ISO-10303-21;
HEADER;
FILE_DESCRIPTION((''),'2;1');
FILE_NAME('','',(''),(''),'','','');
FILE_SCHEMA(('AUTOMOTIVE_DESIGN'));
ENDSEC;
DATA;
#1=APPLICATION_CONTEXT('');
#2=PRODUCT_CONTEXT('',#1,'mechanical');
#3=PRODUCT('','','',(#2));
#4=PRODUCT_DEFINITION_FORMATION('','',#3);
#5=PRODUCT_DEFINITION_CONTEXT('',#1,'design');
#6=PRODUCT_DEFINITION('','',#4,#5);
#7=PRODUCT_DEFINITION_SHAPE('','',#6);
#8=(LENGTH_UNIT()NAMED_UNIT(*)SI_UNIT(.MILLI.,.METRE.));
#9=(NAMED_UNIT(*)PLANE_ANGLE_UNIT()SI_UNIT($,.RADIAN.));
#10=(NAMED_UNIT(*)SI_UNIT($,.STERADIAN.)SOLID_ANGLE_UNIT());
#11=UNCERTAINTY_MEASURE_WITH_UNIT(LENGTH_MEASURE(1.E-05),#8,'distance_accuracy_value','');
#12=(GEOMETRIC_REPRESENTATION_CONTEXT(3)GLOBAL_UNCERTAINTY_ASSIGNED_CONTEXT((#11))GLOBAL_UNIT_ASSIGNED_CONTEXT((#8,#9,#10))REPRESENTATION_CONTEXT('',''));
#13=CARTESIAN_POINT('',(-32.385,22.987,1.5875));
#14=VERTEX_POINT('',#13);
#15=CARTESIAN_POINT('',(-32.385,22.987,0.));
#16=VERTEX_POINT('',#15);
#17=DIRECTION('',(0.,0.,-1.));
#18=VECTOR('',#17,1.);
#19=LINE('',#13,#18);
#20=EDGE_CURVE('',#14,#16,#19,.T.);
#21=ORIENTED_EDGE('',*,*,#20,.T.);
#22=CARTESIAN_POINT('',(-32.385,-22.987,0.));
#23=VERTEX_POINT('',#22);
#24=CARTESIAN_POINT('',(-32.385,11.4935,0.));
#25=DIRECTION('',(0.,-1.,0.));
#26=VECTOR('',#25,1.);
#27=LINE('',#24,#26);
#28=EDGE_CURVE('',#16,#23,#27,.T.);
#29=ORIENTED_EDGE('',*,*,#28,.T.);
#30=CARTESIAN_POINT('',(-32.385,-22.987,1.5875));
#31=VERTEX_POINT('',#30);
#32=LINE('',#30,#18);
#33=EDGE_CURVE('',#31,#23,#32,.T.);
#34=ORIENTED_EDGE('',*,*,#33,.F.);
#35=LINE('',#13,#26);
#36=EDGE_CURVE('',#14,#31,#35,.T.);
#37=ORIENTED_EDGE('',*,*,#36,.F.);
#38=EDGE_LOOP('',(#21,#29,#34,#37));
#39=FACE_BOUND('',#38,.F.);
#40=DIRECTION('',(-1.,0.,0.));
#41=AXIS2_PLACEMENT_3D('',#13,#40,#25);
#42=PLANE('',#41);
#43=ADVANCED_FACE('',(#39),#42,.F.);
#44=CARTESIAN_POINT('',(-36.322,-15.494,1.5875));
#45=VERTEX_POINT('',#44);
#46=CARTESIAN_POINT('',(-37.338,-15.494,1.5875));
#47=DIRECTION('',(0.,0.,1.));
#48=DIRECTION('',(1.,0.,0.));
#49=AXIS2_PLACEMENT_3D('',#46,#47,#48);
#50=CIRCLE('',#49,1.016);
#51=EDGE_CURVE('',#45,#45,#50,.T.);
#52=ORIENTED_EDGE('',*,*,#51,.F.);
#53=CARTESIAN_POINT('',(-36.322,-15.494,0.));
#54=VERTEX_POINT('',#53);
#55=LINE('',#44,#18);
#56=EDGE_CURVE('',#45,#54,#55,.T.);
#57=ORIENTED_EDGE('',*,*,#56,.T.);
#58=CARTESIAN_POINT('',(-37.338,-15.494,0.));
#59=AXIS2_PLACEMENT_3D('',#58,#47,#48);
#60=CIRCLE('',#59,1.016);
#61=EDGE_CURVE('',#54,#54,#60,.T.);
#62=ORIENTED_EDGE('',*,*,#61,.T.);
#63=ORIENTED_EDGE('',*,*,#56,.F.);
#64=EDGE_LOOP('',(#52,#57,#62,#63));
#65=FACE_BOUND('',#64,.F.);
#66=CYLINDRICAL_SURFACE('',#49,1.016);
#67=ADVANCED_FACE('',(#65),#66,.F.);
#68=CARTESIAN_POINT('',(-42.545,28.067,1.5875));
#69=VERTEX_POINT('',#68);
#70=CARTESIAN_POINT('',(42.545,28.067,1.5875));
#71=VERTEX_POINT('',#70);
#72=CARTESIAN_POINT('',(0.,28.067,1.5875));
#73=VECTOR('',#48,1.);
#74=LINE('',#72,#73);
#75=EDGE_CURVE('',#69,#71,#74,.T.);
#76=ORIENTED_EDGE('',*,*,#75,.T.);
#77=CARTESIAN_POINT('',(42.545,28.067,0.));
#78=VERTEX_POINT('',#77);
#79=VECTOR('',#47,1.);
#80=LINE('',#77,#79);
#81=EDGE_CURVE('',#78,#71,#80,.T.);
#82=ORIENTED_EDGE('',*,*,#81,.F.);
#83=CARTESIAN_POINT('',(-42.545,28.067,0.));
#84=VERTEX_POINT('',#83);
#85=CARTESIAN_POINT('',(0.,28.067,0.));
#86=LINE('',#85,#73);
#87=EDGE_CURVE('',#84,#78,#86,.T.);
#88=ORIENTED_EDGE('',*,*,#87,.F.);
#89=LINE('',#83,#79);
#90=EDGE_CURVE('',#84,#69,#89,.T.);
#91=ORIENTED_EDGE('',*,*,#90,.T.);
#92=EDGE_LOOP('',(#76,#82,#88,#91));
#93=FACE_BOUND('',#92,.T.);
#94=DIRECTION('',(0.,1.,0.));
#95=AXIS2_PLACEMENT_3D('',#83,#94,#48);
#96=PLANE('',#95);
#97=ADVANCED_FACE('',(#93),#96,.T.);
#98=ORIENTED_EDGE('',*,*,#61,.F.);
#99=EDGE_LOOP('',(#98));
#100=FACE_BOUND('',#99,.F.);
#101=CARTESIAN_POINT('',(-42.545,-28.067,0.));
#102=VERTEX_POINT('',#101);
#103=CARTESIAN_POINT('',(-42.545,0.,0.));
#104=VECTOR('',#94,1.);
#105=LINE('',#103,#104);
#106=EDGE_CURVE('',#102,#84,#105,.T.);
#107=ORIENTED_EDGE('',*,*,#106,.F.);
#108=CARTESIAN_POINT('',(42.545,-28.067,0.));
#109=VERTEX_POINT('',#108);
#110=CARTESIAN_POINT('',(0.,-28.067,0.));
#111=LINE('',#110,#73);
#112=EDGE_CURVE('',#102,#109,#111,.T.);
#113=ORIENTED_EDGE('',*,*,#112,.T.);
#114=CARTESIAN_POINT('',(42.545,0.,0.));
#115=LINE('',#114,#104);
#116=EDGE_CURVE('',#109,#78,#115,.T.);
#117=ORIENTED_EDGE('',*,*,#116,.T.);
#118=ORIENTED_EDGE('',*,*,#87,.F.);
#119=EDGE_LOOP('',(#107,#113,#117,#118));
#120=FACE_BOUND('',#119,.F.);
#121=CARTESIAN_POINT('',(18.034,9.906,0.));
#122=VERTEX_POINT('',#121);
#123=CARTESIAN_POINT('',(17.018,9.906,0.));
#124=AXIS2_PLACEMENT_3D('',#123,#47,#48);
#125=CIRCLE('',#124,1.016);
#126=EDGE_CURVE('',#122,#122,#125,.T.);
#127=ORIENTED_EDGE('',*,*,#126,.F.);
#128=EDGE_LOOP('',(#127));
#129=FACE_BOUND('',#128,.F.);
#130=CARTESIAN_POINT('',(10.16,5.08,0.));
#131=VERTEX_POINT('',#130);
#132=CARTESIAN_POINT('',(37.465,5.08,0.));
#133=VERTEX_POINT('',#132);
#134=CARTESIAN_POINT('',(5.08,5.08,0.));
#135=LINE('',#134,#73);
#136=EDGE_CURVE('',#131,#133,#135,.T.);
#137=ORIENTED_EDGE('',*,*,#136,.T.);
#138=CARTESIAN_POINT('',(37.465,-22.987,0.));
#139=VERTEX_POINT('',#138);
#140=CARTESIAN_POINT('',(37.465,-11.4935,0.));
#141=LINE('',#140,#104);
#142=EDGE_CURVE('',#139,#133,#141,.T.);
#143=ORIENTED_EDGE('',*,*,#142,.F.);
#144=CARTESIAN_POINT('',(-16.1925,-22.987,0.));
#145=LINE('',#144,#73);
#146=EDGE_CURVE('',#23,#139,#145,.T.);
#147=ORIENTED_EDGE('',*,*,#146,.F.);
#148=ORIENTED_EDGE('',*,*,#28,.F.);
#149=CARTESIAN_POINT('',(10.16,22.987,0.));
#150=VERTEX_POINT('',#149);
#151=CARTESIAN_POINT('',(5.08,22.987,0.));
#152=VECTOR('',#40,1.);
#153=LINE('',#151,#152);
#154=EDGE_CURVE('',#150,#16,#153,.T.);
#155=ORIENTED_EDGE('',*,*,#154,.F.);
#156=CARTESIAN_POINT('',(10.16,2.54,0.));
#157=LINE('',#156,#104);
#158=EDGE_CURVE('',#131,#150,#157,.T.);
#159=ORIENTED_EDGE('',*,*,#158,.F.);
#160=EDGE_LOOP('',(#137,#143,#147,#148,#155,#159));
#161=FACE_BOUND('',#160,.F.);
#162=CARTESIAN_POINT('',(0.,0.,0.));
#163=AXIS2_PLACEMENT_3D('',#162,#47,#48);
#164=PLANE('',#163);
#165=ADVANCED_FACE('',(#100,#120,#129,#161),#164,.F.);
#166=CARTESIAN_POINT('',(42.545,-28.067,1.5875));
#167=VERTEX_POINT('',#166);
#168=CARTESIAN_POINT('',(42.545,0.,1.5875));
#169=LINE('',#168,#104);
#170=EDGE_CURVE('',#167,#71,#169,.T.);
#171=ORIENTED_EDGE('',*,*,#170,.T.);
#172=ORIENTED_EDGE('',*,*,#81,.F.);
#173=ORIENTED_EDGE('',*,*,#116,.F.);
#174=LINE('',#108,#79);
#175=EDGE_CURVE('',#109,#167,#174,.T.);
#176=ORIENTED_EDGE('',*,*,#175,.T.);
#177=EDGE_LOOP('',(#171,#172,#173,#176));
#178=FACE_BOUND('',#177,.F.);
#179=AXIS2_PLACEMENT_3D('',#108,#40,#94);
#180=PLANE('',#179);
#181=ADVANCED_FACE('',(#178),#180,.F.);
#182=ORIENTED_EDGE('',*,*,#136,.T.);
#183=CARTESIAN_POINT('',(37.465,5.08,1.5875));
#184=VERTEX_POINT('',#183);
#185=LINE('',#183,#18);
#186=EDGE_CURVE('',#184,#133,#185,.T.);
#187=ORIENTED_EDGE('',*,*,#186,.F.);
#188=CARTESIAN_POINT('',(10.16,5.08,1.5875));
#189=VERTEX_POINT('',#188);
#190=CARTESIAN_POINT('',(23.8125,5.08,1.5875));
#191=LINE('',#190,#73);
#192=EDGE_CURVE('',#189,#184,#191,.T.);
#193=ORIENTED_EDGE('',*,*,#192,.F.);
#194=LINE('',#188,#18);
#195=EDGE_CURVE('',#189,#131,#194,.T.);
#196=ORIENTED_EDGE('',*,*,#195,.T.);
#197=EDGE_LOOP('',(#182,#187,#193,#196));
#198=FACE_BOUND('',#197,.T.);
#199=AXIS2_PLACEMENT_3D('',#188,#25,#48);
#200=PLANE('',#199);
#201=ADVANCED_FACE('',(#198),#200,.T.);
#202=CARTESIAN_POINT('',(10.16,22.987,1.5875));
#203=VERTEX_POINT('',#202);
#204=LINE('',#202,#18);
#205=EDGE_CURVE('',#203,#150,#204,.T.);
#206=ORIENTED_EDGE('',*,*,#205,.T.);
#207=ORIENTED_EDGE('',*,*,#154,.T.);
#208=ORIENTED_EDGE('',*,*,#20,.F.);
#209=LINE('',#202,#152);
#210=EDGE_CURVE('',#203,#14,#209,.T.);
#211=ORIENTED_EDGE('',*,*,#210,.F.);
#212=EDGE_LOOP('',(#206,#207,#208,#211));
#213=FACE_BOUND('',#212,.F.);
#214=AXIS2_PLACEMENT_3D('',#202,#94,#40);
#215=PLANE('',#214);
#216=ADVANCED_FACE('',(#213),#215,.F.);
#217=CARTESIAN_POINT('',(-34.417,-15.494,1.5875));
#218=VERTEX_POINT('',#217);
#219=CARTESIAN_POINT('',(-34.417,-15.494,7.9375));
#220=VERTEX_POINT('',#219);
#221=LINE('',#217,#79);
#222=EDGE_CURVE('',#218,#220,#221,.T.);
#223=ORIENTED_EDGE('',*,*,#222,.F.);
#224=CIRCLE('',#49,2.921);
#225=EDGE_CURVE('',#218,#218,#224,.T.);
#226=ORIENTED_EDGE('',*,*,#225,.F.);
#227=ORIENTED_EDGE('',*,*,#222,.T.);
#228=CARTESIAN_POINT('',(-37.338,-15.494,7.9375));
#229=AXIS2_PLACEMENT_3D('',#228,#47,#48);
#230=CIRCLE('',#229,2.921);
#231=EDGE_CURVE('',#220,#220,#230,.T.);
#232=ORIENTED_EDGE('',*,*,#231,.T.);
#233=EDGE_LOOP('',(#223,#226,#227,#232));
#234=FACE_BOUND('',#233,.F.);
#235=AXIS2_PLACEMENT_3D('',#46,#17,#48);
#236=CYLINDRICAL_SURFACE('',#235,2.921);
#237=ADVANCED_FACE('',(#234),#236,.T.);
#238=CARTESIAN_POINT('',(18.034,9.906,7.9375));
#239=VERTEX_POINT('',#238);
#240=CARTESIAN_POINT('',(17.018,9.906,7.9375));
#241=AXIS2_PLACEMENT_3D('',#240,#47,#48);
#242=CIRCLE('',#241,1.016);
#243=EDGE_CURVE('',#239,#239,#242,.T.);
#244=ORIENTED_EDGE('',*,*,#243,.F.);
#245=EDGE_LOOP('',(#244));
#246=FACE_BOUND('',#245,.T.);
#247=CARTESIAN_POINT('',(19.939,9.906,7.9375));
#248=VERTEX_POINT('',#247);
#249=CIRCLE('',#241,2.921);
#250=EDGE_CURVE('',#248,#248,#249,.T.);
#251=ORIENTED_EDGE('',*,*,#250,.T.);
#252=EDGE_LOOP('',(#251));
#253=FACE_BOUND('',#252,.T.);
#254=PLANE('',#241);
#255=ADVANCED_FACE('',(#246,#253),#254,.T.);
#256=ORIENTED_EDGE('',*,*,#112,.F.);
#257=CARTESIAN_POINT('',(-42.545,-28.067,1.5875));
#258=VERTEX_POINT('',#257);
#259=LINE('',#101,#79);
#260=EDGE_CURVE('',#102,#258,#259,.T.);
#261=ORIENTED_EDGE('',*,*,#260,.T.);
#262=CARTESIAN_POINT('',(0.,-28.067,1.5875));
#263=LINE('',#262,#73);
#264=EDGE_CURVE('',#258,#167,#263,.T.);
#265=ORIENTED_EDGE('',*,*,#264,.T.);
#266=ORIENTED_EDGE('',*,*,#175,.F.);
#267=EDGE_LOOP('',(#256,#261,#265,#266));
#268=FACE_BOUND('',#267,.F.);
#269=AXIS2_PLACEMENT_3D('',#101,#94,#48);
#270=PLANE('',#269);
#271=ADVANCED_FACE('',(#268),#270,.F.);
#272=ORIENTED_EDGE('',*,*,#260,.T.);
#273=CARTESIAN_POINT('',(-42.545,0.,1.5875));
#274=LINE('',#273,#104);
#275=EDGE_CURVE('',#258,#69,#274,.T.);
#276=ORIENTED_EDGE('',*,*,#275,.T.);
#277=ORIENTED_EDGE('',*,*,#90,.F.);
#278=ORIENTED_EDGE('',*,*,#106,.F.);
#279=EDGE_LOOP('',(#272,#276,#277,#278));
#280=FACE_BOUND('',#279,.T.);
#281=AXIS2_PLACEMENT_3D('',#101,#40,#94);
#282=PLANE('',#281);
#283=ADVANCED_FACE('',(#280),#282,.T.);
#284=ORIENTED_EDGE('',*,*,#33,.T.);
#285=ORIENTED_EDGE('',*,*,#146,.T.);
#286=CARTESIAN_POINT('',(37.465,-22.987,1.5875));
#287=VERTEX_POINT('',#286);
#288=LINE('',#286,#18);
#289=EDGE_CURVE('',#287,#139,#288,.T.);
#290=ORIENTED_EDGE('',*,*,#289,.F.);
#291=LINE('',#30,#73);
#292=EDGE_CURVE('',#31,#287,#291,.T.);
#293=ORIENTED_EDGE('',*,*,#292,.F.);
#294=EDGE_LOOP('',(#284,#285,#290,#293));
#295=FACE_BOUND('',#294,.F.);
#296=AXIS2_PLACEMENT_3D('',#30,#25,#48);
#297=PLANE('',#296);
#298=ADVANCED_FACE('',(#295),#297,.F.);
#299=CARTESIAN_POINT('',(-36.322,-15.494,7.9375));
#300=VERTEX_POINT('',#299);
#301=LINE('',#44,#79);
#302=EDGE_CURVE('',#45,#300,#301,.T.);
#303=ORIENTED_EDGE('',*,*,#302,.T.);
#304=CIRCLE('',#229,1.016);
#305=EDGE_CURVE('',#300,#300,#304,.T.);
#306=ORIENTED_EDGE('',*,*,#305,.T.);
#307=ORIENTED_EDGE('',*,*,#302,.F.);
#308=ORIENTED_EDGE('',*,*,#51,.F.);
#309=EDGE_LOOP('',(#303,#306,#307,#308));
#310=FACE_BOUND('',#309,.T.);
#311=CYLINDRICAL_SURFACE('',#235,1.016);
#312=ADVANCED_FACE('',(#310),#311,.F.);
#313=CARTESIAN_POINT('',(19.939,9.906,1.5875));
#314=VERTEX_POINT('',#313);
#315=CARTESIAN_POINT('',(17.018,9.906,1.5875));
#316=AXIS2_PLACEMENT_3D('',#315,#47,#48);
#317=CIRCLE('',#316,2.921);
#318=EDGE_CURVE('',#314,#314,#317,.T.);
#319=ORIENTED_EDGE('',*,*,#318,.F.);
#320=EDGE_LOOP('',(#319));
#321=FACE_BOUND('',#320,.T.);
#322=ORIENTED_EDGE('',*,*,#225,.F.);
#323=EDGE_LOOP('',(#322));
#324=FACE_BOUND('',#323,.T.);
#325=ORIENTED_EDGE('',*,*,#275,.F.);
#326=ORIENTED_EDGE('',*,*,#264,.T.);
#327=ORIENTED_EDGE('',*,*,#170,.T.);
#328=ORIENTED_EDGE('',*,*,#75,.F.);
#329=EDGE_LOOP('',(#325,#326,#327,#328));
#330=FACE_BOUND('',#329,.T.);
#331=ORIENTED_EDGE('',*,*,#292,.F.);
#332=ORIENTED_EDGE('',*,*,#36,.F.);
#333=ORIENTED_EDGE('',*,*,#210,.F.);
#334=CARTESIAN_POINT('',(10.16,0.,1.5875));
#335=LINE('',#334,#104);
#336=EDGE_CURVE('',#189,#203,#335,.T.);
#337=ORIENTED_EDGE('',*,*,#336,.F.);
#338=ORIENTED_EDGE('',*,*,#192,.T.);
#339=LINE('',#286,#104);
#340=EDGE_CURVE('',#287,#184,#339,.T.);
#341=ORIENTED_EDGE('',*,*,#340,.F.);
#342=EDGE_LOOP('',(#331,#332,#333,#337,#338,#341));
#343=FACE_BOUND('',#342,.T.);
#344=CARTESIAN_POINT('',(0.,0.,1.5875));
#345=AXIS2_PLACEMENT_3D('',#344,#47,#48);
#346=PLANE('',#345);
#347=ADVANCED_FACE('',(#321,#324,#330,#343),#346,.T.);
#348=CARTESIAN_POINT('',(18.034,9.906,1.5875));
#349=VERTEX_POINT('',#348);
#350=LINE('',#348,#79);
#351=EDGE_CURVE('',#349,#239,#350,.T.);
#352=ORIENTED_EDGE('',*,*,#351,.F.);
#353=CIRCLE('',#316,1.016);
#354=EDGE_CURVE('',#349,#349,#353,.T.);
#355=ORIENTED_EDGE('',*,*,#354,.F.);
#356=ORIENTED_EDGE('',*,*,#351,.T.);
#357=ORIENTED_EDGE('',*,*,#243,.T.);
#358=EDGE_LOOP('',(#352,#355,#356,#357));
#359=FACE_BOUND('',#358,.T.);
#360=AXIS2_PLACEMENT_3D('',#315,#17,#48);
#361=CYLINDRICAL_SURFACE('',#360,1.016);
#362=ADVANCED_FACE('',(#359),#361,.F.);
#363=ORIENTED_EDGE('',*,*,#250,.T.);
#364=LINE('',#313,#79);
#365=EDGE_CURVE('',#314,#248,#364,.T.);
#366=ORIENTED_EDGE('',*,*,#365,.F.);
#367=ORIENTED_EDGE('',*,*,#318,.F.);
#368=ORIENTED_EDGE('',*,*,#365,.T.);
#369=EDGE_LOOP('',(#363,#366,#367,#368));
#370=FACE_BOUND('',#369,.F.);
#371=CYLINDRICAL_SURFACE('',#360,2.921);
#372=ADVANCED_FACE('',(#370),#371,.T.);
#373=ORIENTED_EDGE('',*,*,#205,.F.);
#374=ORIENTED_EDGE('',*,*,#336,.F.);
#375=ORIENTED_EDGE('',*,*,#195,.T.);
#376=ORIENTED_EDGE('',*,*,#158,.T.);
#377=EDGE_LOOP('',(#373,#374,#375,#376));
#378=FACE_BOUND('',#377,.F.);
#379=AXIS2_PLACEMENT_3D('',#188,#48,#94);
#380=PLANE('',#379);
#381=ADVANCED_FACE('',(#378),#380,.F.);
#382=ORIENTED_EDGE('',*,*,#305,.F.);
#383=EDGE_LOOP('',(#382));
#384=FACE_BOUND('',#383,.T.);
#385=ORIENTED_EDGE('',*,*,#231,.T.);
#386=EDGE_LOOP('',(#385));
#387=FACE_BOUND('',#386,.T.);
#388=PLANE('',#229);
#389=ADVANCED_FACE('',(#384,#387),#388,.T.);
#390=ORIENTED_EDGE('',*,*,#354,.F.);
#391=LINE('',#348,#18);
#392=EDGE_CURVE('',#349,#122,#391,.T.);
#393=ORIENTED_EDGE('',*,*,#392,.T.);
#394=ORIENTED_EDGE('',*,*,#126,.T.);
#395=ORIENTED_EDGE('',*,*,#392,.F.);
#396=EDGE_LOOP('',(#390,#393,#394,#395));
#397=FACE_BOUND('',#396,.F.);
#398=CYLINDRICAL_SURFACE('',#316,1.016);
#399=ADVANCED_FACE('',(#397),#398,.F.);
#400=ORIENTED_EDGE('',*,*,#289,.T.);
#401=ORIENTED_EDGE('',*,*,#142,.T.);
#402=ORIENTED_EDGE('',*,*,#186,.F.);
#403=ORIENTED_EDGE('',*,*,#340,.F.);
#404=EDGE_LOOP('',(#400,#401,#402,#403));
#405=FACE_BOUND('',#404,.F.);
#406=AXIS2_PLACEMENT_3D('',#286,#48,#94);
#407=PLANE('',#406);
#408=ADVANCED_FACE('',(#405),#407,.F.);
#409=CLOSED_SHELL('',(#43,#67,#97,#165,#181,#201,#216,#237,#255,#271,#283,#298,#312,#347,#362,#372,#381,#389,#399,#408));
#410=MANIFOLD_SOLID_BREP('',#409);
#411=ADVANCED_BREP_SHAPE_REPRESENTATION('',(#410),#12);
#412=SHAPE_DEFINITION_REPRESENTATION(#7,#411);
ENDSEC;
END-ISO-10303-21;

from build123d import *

# Parameters (mm, degrees)
F0_W     = 85.09
F0_H     = 56.134
F1_DEPTH = 1.5875
F2_R     = 2.921
F2_R_2   = 1.016
F3_DEPTH = 6.35
F4_DEPTH = 6.35
F5_W     = 32.385
F5_H     = 22.987
F5_W_2   = 27.305
F5_H_2   = 5.08
F6_DEPTH = 6.35


# Not quite as in the source:
# - a feature names something its author has since deleted; it is built from what else it names


with BuildPart() as f1:
    # F0 (on Top) → F1 (new body)
    with BuildSketch(Plane.XY):
        Rectangle(F0_W, F0_H)
    extrude(amount=F1_DEPTH)

    # F2 (on face) → F3 (join)
    with BuildSketch(Plane.XY.offset(1.5875)):
        with Locations((17.018, 9.906)):
            Circle(F2_R)
        with Locations((17.018, 9.906)):
            Circle(F2_R_2, mode=Mode.SUBTRACT)
        with Locations((-37.338, -15.494)):
            Circle(F2_R)
        with Locations((-37.338, -15.494)):
            Circle(F2_R_2, mode=Mode.SUBTRACT)
    extrude(amount=F3_DEPTH)

    # F2 (on face) → F4 (cut)
    with BuildSketch(Plane.XY.offset(1.5875)):
        with Locations((-37.338, -15.494)):
            Circle(F2_R_2)
        with Locations((17.018, 9.906)):
            Circle(F2_R_2)
    extrude(amount=-F4_DEPTH, mode=Mode.SUBTRACT)

    # F5 (on face) → F6 (cut)
    with BuildSketch(Plane.XY.offset(1.5875)):
        with Locations((-16.1925, 11.4935)):
            Rectangle(F5_W, F5_H)
        Polygon((0, 22.987), (0, 0), (10.16, 0), (10.16, 5.08), (10.16, 22.987), align=None)
        with Locations((23.8125, 2.54)):
            Rectangle(F5_W_2, F5_H_2)
        Polygon((10.16, 0), (0, 0), (0, -22.987), (37.465, -22.987), (37.465, 0), align=None)
        with Locations((-16.1925, -11.4935)):
            Rectangle(F5_W, F5_H)
    extrude(amount=-F6_DEPTH, mode=Mode.SUBTRACT)


solid = f1.part
